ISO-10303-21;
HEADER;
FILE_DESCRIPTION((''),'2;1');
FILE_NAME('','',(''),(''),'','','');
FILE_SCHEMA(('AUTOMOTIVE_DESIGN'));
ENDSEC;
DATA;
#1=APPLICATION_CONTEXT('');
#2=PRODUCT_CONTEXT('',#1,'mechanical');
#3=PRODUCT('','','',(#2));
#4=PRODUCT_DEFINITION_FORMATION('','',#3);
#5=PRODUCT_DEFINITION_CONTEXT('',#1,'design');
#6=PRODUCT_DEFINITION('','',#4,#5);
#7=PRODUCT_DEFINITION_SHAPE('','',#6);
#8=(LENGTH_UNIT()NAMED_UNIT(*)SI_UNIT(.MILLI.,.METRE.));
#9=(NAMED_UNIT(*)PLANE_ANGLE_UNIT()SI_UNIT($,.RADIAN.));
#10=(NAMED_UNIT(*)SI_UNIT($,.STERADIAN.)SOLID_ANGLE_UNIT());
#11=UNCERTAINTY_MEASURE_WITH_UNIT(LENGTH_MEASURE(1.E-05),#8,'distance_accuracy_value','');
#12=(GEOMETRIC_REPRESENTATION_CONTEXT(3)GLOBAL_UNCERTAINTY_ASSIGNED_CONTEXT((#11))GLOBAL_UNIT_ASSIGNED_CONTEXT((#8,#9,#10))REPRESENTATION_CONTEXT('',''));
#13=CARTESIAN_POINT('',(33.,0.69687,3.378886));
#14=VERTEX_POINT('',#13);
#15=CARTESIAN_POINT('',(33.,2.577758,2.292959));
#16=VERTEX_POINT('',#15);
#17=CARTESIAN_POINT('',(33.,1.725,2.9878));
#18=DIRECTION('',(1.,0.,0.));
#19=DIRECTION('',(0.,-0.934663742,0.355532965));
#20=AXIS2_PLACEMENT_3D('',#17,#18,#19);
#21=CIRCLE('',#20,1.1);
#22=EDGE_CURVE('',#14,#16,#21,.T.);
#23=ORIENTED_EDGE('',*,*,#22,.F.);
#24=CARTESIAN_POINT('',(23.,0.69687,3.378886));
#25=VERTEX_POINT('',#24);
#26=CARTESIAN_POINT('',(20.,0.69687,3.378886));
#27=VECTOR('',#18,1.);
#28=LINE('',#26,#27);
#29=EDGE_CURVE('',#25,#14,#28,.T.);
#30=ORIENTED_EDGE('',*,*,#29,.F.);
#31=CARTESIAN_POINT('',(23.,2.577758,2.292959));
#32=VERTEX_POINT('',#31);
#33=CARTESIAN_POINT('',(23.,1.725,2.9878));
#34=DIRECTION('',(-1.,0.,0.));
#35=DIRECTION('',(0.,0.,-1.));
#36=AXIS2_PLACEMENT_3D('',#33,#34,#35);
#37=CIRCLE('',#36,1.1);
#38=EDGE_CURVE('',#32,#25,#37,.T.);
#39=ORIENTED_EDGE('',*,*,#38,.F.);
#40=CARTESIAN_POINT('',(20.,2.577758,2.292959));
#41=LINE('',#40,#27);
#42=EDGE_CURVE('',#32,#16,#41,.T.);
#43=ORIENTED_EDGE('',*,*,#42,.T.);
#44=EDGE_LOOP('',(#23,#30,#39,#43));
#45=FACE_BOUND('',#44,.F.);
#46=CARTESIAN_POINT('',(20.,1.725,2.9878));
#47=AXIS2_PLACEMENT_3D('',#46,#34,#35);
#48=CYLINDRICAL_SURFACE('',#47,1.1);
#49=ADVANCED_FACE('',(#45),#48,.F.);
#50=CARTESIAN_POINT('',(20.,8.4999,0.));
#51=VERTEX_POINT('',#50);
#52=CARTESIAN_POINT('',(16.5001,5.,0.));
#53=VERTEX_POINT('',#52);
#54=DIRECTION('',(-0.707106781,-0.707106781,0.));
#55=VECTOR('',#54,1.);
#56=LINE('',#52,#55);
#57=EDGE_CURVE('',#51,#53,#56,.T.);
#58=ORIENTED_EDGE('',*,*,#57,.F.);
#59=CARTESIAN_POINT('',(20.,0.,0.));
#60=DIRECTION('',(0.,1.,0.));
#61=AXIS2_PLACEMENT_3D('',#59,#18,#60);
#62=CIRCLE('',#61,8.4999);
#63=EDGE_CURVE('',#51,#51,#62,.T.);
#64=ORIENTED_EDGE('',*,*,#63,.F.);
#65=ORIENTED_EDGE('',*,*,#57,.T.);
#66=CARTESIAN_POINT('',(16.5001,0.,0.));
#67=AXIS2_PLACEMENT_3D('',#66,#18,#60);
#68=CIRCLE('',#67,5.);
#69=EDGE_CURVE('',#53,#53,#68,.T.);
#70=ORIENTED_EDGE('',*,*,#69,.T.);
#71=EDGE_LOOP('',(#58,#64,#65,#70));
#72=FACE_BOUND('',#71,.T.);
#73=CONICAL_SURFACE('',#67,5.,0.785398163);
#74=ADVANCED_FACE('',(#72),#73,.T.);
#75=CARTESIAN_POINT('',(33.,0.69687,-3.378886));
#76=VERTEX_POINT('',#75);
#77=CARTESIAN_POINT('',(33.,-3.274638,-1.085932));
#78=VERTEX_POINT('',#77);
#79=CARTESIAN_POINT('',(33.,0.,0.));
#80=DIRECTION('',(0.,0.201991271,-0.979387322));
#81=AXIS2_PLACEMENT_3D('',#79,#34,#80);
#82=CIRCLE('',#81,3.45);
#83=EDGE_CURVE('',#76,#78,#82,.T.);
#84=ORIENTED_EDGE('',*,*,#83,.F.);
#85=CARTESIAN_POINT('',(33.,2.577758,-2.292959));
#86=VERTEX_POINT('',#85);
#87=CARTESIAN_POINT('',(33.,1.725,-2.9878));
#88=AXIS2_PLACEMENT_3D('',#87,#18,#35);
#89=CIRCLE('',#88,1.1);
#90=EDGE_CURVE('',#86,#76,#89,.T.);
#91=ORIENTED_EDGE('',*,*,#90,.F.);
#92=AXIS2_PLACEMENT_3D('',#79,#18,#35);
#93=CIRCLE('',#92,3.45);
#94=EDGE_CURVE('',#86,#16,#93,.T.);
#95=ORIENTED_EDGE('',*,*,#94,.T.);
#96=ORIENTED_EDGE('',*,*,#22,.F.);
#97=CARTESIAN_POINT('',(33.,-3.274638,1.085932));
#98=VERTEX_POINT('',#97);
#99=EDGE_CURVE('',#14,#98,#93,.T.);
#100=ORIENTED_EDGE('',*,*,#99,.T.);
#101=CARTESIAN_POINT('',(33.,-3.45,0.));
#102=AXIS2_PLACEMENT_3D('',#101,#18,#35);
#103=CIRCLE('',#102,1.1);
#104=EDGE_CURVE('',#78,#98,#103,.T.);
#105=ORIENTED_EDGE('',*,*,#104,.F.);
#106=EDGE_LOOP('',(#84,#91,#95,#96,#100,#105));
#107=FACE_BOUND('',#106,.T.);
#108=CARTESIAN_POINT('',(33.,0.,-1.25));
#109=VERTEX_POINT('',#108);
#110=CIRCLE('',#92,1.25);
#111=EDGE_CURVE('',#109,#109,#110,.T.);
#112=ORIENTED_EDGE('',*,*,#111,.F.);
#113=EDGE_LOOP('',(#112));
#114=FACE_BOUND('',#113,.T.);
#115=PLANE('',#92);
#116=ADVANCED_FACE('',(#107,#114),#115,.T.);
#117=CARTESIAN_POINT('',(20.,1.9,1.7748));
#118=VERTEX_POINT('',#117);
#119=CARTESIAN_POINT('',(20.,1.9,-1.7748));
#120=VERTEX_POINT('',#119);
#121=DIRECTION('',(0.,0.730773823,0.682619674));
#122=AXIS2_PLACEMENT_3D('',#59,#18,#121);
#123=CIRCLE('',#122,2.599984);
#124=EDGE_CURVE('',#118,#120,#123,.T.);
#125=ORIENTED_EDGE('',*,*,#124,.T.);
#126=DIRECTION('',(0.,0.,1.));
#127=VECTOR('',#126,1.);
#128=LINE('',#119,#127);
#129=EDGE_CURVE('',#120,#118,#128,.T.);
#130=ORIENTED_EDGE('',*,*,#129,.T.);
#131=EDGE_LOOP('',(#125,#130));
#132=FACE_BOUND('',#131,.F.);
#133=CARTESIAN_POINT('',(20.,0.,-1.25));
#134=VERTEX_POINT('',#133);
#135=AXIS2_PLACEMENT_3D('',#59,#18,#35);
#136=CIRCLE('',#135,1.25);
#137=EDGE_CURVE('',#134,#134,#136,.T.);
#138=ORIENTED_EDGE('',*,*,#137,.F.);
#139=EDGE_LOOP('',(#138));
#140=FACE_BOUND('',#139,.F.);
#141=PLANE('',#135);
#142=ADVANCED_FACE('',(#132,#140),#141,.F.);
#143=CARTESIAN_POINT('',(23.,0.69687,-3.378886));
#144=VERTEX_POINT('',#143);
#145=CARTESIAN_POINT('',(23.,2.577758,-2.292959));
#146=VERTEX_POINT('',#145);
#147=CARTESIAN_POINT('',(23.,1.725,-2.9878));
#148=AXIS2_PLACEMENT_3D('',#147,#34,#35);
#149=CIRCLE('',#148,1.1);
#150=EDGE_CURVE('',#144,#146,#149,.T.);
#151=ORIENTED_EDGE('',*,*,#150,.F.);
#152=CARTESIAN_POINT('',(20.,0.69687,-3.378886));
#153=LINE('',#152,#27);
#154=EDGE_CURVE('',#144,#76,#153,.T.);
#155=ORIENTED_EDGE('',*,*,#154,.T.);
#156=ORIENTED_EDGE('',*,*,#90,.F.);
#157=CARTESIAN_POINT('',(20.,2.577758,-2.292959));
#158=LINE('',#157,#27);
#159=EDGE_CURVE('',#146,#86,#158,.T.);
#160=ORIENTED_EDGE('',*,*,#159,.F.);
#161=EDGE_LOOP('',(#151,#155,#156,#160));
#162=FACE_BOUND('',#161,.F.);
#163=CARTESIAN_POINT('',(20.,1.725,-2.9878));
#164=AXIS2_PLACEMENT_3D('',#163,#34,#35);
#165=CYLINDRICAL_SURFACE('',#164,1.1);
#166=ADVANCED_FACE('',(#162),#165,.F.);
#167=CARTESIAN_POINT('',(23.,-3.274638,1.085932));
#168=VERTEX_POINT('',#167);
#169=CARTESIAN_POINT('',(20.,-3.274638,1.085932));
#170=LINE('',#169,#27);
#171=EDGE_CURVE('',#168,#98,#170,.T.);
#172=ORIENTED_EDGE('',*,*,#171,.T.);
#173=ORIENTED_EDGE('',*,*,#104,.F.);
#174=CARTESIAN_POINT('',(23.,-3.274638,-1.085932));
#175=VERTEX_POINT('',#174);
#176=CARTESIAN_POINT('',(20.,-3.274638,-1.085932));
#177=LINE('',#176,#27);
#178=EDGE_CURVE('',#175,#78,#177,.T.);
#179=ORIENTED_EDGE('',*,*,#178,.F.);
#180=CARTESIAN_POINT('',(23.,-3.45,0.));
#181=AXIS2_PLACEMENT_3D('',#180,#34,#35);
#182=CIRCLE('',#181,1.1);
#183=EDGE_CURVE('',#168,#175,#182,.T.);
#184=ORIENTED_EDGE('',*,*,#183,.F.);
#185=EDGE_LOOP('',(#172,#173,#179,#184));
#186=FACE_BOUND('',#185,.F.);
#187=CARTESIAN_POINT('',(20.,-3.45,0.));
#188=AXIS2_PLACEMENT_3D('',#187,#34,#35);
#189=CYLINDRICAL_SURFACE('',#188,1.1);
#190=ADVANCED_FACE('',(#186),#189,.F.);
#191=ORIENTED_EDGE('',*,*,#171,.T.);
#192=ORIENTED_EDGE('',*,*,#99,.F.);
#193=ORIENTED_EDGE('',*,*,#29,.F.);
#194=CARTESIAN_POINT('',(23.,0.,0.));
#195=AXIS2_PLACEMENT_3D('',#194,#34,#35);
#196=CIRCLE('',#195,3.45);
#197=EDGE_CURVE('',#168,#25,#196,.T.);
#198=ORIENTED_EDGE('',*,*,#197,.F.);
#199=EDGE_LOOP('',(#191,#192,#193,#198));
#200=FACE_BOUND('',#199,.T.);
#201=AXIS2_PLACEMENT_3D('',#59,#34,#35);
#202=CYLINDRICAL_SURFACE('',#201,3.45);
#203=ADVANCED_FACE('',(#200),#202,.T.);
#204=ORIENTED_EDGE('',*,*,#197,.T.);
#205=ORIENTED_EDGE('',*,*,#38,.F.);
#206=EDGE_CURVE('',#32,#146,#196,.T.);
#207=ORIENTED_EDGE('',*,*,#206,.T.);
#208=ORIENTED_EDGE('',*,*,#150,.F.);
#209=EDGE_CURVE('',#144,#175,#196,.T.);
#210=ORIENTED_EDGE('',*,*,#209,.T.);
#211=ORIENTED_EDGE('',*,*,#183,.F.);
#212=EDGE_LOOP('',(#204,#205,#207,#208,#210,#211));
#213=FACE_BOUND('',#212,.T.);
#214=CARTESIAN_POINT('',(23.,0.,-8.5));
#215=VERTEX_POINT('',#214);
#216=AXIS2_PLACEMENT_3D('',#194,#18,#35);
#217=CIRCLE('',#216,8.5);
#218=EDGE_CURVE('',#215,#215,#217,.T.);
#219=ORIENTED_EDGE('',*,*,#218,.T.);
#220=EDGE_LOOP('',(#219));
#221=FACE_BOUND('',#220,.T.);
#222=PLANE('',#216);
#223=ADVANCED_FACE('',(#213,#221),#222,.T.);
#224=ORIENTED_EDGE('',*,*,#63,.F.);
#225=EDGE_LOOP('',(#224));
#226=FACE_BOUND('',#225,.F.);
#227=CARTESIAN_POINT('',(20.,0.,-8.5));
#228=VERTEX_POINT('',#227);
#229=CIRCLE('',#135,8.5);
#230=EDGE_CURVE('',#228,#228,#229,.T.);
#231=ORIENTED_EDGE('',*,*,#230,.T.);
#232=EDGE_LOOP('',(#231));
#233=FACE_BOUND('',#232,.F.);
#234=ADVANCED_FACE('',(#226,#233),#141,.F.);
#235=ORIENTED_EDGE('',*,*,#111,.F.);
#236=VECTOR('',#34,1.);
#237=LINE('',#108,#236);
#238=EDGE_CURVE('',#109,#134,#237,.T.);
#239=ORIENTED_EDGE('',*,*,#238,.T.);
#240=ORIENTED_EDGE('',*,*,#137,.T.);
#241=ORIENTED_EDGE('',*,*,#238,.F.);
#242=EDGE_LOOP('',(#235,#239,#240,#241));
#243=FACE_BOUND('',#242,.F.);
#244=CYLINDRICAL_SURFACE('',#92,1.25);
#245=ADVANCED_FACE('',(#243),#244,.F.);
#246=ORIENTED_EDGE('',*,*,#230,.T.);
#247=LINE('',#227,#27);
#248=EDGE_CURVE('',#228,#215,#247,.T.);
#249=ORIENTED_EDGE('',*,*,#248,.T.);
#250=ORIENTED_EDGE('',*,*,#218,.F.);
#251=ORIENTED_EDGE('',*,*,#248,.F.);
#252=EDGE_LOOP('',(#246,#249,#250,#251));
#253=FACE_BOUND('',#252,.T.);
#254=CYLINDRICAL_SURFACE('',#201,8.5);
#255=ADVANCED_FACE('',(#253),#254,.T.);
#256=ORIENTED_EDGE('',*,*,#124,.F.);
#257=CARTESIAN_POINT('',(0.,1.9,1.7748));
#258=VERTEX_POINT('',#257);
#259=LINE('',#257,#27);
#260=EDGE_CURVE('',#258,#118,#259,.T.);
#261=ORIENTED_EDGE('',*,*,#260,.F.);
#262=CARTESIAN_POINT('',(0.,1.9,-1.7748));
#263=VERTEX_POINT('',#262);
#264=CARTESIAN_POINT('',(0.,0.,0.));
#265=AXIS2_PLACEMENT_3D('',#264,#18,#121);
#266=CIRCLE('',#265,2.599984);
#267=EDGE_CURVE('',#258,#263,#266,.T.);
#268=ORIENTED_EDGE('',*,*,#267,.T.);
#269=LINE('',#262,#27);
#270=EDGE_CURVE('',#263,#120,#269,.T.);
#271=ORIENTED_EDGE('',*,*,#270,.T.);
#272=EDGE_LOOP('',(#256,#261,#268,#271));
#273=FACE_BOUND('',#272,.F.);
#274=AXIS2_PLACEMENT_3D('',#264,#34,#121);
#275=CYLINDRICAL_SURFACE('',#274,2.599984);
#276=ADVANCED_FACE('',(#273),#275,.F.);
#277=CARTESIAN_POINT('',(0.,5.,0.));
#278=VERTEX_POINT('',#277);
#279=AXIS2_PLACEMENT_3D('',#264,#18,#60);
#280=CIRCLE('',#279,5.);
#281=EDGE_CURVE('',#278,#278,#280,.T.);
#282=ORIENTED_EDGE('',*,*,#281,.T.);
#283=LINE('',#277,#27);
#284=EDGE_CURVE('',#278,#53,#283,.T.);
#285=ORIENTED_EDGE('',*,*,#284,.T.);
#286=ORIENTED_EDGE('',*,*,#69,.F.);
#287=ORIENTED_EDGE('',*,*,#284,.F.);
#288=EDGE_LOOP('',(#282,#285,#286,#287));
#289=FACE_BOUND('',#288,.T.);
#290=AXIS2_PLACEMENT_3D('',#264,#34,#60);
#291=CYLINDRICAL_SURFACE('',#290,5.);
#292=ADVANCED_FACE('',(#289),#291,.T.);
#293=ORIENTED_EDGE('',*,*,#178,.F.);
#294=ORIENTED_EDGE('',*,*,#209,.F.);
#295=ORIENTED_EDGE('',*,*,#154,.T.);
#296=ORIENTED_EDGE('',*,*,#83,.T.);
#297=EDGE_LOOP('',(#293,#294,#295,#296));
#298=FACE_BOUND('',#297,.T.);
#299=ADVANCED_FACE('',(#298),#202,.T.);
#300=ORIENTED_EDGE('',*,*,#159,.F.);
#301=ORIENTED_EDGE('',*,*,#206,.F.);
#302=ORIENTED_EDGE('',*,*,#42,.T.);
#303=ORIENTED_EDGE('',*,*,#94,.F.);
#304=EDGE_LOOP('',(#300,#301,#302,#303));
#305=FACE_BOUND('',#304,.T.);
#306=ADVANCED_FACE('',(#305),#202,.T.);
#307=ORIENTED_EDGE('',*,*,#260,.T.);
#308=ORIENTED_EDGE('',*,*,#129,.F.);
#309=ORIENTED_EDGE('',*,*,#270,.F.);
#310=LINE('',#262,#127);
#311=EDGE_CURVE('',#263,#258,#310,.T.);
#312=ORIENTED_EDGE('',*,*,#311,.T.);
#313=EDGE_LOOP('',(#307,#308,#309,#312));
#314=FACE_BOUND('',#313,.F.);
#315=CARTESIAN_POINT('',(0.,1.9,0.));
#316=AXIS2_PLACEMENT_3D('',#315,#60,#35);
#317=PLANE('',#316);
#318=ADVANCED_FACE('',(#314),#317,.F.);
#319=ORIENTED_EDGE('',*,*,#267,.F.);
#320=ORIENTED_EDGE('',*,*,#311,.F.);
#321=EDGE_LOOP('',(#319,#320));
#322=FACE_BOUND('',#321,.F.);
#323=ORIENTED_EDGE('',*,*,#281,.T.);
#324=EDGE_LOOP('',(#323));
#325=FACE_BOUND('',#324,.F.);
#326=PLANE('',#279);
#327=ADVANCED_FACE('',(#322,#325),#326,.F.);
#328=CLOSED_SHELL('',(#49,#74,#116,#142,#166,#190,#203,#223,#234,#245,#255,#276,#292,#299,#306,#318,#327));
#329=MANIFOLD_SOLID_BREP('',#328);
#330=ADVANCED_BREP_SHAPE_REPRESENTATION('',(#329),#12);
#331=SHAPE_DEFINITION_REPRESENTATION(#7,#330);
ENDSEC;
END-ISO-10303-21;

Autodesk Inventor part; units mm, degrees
ref_plane "YZ Plane" through (0, 0, 0) normal (1, 0, 0) x (0, 1, 0)
ref_plane "XZ Plane" through (0, 0, 0) normal (0, 1, 0) x (-1, 0, 0)
ref_plane "XY Plane" through (0, 0, 0) normal (0, 0, 1) x (1, 0, 0)
sketch "Эскиз1" plane through (0, 0, 0) normal (1, 0, 0) x (0, 1, 0)
  arc A0 (1.9, 1.7748) -> (1.9, -1.7748) centre (0, 0) ccw
  line L0 (0, 0) -> (1.9, 0)
  line L1 (1.9, 0) -> (1.9, -1.7748)
  line L2 (1.9, 0) -> (1.9, 1.7748)
  circle A1 centre (0, 0) radius 5
  dimension "d0" = 5.2
  dimension "d1" = 1.9
  dimension "d2" = 10
extrude "Выдавливание1" add sketch "Эскиз1" along normal blind 20
sketch "Эскиз2" plane through (20, 0, 0) normal (1, 0, 0) x (0, 0, -1)
  circle A0 centre (0, 0) radius 3.45
  circle A1 centre (0, -3.45) radius 1.1
  circle A2 centre (2.9878, 1.725) radius 1.1
  circle A3 centre (-2.9878, 1.725) radius 1.1
  circle A4 centre (0, 0) radius 8.5
  point P0 (-2.293, 2.5778)
  point P1 (-3.3789, 0.6969)
  point P2 (-1.0859, -3.2746)
  point P3 (1.0859, -3.2746)
  point P4 (3.3789, 0.6969)
  point P5 (2.293, 2.5778)
  dimension "d5" = 6.9
  dimension "d6" = 2.2
  dimension "d9" = 360
  dimension "d13" = 17
extrude "Выдавливание2" add sketch "Эскиз2" along normal blind 13 contours A0 A1 A3 A2
sketch "Эскиз3" plane through (20, 0, 0) normal (1, 0, 0) x (0, 0, -1)
  circle A0 centre (0, 0) radius 8.5
  dimension "d14" = 17
extrude "Выдавливание3" add sketch "Эскиз3" along normal blind 3
chamfer "Фаска1" distance 3.5 angle 45 1 edges at (20, -5, 0)
sketch "Эскиз4" plane through (33, 0, 0) normal (1, 0, 0) x (0, 0, -1)
  circle A0 centre (0, 0) radius 1.25
  dimension "d20" = 2.5
extrude "Выдавливание4" cut sketch "Эскиз4" against normal through all
properties part number "передача момента"
